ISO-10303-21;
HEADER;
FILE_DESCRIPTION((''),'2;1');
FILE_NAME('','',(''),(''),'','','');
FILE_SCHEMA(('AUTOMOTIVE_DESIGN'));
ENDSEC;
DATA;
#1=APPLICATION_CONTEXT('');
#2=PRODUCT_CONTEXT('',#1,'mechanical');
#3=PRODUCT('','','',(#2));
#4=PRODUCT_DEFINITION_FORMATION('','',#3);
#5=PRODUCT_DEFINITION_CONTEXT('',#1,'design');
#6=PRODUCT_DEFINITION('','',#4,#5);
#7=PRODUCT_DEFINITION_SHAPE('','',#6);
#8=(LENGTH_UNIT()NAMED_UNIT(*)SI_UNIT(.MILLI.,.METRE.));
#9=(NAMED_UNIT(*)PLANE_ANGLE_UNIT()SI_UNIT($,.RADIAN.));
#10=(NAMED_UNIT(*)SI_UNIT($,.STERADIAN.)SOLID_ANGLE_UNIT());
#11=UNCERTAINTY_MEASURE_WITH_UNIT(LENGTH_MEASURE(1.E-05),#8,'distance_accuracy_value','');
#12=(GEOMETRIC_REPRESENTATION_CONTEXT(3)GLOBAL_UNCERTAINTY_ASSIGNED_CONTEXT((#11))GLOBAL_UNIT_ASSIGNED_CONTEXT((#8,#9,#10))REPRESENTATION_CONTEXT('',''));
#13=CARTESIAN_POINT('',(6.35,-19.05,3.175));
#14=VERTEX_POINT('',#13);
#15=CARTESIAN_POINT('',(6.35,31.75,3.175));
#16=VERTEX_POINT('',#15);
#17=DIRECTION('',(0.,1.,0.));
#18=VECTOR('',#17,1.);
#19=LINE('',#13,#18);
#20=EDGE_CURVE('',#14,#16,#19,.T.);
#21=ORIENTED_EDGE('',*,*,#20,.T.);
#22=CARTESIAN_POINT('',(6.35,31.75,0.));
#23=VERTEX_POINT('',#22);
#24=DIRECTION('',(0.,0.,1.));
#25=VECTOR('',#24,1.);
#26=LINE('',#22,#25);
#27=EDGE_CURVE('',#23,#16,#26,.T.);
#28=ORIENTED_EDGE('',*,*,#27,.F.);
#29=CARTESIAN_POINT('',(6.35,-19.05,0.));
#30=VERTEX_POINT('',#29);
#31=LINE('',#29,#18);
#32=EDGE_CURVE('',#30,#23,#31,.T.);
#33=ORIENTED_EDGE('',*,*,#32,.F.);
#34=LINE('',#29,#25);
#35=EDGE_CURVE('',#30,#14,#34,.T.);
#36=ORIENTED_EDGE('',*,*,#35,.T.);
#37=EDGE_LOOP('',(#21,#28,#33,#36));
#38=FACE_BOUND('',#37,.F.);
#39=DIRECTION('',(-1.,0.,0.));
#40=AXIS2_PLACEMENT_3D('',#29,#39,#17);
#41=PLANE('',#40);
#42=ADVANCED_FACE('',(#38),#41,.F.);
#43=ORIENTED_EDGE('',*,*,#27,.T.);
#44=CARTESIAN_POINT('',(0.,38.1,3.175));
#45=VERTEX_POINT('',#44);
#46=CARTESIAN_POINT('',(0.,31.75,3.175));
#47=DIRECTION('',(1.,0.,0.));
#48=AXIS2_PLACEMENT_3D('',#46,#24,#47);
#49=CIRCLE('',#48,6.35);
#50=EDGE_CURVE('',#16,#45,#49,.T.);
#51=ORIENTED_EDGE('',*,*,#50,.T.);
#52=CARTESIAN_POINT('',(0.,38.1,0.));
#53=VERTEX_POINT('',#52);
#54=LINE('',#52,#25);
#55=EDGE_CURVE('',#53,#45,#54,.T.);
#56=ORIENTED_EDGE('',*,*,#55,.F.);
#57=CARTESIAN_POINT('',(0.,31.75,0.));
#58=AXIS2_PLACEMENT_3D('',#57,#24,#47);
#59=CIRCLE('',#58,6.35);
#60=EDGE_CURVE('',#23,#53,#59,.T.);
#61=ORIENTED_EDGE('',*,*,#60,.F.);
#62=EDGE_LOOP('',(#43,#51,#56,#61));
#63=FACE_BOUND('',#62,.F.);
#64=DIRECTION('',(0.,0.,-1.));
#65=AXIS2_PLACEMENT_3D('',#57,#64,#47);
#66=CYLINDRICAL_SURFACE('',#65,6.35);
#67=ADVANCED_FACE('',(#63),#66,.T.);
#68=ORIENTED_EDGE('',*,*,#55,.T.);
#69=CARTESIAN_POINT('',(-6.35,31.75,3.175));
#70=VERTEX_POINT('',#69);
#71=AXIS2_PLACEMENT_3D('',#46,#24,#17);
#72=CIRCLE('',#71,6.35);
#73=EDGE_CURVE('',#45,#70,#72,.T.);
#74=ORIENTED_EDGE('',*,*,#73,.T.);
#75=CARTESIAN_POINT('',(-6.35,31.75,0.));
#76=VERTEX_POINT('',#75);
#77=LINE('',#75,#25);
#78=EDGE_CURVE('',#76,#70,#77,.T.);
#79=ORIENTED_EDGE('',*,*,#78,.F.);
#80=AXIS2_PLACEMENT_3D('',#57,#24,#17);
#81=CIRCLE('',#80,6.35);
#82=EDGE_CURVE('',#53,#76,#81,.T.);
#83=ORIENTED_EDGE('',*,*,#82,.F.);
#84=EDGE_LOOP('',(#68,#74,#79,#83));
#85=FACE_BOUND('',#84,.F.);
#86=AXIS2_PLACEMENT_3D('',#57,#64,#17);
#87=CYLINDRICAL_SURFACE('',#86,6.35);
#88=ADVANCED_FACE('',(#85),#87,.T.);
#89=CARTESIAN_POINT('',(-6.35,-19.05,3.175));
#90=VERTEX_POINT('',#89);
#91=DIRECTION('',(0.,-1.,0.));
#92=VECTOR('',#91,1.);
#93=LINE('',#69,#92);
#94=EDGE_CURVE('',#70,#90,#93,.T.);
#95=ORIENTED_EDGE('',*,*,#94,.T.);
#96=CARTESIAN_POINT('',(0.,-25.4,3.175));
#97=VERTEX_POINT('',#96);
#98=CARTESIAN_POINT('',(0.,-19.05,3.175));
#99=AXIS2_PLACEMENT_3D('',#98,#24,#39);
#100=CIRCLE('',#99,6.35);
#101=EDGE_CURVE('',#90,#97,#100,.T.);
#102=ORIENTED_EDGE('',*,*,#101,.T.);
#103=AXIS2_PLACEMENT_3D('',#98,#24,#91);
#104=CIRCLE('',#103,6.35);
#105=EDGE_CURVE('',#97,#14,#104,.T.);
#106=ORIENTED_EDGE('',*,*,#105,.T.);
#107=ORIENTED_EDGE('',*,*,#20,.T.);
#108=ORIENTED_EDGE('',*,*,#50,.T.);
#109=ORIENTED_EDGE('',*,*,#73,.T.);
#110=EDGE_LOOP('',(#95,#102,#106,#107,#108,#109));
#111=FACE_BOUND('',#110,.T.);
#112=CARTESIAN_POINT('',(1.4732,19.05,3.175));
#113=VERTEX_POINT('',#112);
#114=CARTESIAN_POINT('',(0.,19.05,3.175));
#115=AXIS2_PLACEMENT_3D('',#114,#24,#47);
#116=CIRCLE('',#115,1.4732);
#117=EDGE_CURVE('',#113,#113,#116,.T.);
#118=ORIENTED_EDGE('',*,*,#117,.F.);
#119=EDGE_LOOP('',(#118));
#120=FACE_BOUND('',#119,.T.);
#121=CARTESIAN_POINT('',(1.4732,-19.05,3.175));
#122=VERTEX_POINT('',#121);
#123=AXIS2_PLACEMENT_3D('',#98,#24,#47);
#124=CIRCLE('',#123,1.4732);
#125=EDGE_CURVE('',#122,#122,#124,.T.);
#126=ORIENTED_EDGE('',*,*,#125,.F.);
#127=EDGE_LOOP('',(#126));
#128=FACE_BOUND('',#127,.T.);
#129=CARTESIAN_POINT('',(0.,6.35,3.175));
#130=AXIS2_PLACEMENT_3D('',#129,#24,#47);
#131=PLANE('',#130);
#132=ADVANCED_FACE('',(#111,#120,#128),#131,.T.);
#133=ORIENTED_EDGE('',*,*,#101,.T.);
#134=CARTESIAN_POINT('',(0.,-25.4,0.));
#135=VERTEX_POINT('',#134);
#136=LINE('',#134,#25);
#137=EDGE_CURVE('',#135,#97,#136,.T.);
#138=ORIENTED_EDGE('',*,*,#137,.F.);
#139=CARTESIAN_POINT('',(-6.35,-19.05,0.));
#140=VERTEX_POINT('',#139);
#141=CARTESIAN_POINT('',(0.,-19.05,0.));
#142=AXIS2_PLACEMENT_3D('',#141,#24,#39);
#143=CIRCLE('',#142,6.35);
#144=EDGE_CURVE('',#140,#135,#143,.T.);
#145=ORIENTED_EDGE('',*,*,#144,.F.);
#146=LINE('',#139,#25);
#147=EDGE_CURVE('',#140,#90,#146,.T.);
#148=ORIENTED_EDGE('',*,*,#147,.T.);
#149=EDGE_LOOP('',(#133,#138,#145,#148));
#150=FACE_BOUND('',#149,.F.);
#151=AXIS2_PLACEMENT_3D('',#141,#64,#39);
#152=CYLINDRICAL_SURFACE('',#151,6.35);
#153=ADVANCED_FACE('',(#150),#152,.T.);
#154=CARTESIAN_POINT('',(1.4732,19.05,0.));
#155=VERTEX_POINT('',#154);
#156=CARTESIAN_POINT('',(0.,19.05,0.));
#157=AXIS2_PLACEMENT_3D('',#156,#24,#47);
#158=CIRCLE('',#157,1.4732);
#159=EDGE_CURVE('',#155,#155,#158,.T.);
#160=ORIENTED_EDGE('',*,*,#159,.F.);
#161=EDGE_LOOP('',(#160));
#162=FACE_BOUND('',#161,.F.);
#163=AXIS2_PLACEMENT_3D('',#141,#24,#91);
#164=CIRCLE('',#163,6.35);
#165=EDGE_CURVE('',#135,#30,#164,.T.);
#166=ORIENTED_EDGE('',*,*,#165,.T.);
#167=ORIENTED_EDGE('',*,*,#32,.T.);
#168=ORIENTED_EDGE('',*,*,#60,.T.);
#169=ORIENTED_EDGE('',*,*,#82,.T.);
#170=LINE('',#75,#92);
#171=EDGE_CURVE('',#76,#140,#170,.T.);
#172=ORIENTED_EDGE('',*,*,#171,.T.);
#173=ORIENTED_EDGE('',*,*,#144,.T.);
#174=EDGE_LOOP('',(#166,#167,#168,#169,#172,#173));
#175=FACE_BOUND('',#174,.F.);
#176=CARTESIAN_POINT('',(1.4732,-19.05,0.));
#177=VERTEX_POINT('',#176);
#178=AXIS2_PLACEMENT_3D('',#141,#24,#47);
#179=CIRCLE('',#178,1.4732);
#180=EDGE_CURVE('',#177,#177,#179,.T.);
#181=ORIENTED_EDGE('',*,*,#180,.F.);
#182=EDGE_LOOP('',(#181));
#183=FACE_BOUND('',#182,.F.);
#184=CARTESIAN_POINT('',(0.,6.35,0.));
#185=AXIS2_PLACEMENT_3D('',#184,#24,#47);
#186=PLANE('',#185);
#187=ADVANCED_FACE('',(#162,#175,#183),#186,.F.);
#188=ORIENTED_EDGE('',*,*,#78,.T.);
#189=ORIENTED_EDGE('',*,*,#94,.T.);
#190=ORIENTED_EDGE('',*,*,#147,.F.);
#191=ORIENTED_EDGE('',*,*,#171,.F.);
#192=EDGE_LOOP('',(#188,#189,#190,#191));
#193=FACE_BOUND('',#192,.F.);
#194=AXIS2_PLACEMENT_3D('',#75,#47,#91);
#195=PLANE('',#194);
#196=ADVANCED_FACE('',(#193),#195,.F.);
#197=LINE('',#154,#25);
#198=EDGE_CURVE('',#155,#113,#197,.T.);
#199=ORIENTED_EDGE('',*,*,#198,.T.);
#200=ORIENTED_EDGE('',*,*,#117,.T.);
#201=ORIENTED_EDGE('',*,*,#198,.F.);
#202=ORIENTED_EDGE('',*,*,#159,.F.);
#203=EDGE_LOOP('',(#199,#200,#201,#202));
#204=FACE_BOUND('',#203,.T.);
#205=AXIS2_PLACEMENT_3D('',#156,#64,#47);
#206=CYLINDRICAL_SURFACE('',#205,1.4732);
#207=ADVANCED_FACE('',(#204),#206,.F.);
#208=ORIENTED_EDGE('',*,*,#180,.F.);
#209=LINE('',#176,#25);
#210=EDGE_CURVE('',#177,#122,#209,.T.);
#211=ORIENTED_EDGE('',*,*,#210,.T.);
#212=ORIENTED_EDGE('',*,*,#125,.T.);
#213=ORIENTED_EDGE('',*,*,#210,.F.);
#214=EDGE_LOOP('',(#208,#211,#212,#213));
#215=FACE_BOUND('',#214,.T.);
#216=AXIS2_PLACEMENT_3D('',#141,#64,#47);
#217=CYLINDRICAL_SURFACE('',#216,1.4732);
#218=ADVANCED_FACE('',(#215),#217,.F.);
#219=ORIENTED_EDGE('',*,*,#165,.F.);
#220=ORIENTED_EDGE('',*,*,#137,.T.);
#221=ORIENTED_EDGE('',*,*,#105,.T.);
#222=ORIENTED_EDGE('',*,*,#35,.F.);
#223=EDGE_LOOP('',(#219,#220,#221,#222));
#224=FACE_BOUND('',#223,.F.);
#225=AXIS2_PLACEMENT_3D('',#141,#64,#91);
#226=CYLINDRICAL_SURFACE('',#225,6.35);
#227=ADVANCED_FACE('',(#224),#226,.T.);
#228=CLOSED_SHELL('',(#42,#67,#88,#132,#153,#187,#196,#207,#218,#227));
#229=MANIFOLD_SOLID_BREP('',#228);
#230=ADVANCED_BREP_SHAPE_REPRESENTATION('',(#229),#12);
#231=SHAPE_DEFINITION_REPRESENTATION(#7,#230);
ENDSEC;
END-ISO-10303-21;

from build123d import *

# Parameters (mm, degrees)
F0_R     = 1.4732
F1_DEPTH = 3.175


# Not quite as in the source:
# - a length typed as a fraction of an inch, garbled in the dataset ("3 / 203.2 mm" for 3/8 in), is restored


with BuildPart() as f1:
    # F0 (on Top) → F1 (new body)
    with BuildSketch(Plane.XY):
        with BuildLine():
            Line((6.35, -19.05), (6.35, 25.4))
            Line((6.35, 25.4), (6.35, 31.75))
            ThreePointArc((6.35, 31.75), (4.4901280605, 36.2401280605), (0, 38.1))
            ThreePointArc((0, 38.1), (-4.4901280605, 36.2401280605), (-6.35, 31.75))
            Line((-6.35, 31.75), (-6.35, 25.4))
            Line((-6.35, 25.4), (-6.35, -19.05))
            ThreePointArc((-6.35, -19.05), (-4.4901280605, -23.5401280605), (0, -25.4))
            ThreePointArc((0, -25.4), (4.4901280605, -23.5401280605), (6.35, -19.05))
        make_face()
        with Locations((0, -19.05)):
            Circle(F0_R, mode=Mode.SUBTRACT)
        with Locations((0, 19.05)):
            Circle(F0_R, mode=Mode.SUBTRACT)
    extrude(amount=F1_DEPTH)


solid = f1.part
